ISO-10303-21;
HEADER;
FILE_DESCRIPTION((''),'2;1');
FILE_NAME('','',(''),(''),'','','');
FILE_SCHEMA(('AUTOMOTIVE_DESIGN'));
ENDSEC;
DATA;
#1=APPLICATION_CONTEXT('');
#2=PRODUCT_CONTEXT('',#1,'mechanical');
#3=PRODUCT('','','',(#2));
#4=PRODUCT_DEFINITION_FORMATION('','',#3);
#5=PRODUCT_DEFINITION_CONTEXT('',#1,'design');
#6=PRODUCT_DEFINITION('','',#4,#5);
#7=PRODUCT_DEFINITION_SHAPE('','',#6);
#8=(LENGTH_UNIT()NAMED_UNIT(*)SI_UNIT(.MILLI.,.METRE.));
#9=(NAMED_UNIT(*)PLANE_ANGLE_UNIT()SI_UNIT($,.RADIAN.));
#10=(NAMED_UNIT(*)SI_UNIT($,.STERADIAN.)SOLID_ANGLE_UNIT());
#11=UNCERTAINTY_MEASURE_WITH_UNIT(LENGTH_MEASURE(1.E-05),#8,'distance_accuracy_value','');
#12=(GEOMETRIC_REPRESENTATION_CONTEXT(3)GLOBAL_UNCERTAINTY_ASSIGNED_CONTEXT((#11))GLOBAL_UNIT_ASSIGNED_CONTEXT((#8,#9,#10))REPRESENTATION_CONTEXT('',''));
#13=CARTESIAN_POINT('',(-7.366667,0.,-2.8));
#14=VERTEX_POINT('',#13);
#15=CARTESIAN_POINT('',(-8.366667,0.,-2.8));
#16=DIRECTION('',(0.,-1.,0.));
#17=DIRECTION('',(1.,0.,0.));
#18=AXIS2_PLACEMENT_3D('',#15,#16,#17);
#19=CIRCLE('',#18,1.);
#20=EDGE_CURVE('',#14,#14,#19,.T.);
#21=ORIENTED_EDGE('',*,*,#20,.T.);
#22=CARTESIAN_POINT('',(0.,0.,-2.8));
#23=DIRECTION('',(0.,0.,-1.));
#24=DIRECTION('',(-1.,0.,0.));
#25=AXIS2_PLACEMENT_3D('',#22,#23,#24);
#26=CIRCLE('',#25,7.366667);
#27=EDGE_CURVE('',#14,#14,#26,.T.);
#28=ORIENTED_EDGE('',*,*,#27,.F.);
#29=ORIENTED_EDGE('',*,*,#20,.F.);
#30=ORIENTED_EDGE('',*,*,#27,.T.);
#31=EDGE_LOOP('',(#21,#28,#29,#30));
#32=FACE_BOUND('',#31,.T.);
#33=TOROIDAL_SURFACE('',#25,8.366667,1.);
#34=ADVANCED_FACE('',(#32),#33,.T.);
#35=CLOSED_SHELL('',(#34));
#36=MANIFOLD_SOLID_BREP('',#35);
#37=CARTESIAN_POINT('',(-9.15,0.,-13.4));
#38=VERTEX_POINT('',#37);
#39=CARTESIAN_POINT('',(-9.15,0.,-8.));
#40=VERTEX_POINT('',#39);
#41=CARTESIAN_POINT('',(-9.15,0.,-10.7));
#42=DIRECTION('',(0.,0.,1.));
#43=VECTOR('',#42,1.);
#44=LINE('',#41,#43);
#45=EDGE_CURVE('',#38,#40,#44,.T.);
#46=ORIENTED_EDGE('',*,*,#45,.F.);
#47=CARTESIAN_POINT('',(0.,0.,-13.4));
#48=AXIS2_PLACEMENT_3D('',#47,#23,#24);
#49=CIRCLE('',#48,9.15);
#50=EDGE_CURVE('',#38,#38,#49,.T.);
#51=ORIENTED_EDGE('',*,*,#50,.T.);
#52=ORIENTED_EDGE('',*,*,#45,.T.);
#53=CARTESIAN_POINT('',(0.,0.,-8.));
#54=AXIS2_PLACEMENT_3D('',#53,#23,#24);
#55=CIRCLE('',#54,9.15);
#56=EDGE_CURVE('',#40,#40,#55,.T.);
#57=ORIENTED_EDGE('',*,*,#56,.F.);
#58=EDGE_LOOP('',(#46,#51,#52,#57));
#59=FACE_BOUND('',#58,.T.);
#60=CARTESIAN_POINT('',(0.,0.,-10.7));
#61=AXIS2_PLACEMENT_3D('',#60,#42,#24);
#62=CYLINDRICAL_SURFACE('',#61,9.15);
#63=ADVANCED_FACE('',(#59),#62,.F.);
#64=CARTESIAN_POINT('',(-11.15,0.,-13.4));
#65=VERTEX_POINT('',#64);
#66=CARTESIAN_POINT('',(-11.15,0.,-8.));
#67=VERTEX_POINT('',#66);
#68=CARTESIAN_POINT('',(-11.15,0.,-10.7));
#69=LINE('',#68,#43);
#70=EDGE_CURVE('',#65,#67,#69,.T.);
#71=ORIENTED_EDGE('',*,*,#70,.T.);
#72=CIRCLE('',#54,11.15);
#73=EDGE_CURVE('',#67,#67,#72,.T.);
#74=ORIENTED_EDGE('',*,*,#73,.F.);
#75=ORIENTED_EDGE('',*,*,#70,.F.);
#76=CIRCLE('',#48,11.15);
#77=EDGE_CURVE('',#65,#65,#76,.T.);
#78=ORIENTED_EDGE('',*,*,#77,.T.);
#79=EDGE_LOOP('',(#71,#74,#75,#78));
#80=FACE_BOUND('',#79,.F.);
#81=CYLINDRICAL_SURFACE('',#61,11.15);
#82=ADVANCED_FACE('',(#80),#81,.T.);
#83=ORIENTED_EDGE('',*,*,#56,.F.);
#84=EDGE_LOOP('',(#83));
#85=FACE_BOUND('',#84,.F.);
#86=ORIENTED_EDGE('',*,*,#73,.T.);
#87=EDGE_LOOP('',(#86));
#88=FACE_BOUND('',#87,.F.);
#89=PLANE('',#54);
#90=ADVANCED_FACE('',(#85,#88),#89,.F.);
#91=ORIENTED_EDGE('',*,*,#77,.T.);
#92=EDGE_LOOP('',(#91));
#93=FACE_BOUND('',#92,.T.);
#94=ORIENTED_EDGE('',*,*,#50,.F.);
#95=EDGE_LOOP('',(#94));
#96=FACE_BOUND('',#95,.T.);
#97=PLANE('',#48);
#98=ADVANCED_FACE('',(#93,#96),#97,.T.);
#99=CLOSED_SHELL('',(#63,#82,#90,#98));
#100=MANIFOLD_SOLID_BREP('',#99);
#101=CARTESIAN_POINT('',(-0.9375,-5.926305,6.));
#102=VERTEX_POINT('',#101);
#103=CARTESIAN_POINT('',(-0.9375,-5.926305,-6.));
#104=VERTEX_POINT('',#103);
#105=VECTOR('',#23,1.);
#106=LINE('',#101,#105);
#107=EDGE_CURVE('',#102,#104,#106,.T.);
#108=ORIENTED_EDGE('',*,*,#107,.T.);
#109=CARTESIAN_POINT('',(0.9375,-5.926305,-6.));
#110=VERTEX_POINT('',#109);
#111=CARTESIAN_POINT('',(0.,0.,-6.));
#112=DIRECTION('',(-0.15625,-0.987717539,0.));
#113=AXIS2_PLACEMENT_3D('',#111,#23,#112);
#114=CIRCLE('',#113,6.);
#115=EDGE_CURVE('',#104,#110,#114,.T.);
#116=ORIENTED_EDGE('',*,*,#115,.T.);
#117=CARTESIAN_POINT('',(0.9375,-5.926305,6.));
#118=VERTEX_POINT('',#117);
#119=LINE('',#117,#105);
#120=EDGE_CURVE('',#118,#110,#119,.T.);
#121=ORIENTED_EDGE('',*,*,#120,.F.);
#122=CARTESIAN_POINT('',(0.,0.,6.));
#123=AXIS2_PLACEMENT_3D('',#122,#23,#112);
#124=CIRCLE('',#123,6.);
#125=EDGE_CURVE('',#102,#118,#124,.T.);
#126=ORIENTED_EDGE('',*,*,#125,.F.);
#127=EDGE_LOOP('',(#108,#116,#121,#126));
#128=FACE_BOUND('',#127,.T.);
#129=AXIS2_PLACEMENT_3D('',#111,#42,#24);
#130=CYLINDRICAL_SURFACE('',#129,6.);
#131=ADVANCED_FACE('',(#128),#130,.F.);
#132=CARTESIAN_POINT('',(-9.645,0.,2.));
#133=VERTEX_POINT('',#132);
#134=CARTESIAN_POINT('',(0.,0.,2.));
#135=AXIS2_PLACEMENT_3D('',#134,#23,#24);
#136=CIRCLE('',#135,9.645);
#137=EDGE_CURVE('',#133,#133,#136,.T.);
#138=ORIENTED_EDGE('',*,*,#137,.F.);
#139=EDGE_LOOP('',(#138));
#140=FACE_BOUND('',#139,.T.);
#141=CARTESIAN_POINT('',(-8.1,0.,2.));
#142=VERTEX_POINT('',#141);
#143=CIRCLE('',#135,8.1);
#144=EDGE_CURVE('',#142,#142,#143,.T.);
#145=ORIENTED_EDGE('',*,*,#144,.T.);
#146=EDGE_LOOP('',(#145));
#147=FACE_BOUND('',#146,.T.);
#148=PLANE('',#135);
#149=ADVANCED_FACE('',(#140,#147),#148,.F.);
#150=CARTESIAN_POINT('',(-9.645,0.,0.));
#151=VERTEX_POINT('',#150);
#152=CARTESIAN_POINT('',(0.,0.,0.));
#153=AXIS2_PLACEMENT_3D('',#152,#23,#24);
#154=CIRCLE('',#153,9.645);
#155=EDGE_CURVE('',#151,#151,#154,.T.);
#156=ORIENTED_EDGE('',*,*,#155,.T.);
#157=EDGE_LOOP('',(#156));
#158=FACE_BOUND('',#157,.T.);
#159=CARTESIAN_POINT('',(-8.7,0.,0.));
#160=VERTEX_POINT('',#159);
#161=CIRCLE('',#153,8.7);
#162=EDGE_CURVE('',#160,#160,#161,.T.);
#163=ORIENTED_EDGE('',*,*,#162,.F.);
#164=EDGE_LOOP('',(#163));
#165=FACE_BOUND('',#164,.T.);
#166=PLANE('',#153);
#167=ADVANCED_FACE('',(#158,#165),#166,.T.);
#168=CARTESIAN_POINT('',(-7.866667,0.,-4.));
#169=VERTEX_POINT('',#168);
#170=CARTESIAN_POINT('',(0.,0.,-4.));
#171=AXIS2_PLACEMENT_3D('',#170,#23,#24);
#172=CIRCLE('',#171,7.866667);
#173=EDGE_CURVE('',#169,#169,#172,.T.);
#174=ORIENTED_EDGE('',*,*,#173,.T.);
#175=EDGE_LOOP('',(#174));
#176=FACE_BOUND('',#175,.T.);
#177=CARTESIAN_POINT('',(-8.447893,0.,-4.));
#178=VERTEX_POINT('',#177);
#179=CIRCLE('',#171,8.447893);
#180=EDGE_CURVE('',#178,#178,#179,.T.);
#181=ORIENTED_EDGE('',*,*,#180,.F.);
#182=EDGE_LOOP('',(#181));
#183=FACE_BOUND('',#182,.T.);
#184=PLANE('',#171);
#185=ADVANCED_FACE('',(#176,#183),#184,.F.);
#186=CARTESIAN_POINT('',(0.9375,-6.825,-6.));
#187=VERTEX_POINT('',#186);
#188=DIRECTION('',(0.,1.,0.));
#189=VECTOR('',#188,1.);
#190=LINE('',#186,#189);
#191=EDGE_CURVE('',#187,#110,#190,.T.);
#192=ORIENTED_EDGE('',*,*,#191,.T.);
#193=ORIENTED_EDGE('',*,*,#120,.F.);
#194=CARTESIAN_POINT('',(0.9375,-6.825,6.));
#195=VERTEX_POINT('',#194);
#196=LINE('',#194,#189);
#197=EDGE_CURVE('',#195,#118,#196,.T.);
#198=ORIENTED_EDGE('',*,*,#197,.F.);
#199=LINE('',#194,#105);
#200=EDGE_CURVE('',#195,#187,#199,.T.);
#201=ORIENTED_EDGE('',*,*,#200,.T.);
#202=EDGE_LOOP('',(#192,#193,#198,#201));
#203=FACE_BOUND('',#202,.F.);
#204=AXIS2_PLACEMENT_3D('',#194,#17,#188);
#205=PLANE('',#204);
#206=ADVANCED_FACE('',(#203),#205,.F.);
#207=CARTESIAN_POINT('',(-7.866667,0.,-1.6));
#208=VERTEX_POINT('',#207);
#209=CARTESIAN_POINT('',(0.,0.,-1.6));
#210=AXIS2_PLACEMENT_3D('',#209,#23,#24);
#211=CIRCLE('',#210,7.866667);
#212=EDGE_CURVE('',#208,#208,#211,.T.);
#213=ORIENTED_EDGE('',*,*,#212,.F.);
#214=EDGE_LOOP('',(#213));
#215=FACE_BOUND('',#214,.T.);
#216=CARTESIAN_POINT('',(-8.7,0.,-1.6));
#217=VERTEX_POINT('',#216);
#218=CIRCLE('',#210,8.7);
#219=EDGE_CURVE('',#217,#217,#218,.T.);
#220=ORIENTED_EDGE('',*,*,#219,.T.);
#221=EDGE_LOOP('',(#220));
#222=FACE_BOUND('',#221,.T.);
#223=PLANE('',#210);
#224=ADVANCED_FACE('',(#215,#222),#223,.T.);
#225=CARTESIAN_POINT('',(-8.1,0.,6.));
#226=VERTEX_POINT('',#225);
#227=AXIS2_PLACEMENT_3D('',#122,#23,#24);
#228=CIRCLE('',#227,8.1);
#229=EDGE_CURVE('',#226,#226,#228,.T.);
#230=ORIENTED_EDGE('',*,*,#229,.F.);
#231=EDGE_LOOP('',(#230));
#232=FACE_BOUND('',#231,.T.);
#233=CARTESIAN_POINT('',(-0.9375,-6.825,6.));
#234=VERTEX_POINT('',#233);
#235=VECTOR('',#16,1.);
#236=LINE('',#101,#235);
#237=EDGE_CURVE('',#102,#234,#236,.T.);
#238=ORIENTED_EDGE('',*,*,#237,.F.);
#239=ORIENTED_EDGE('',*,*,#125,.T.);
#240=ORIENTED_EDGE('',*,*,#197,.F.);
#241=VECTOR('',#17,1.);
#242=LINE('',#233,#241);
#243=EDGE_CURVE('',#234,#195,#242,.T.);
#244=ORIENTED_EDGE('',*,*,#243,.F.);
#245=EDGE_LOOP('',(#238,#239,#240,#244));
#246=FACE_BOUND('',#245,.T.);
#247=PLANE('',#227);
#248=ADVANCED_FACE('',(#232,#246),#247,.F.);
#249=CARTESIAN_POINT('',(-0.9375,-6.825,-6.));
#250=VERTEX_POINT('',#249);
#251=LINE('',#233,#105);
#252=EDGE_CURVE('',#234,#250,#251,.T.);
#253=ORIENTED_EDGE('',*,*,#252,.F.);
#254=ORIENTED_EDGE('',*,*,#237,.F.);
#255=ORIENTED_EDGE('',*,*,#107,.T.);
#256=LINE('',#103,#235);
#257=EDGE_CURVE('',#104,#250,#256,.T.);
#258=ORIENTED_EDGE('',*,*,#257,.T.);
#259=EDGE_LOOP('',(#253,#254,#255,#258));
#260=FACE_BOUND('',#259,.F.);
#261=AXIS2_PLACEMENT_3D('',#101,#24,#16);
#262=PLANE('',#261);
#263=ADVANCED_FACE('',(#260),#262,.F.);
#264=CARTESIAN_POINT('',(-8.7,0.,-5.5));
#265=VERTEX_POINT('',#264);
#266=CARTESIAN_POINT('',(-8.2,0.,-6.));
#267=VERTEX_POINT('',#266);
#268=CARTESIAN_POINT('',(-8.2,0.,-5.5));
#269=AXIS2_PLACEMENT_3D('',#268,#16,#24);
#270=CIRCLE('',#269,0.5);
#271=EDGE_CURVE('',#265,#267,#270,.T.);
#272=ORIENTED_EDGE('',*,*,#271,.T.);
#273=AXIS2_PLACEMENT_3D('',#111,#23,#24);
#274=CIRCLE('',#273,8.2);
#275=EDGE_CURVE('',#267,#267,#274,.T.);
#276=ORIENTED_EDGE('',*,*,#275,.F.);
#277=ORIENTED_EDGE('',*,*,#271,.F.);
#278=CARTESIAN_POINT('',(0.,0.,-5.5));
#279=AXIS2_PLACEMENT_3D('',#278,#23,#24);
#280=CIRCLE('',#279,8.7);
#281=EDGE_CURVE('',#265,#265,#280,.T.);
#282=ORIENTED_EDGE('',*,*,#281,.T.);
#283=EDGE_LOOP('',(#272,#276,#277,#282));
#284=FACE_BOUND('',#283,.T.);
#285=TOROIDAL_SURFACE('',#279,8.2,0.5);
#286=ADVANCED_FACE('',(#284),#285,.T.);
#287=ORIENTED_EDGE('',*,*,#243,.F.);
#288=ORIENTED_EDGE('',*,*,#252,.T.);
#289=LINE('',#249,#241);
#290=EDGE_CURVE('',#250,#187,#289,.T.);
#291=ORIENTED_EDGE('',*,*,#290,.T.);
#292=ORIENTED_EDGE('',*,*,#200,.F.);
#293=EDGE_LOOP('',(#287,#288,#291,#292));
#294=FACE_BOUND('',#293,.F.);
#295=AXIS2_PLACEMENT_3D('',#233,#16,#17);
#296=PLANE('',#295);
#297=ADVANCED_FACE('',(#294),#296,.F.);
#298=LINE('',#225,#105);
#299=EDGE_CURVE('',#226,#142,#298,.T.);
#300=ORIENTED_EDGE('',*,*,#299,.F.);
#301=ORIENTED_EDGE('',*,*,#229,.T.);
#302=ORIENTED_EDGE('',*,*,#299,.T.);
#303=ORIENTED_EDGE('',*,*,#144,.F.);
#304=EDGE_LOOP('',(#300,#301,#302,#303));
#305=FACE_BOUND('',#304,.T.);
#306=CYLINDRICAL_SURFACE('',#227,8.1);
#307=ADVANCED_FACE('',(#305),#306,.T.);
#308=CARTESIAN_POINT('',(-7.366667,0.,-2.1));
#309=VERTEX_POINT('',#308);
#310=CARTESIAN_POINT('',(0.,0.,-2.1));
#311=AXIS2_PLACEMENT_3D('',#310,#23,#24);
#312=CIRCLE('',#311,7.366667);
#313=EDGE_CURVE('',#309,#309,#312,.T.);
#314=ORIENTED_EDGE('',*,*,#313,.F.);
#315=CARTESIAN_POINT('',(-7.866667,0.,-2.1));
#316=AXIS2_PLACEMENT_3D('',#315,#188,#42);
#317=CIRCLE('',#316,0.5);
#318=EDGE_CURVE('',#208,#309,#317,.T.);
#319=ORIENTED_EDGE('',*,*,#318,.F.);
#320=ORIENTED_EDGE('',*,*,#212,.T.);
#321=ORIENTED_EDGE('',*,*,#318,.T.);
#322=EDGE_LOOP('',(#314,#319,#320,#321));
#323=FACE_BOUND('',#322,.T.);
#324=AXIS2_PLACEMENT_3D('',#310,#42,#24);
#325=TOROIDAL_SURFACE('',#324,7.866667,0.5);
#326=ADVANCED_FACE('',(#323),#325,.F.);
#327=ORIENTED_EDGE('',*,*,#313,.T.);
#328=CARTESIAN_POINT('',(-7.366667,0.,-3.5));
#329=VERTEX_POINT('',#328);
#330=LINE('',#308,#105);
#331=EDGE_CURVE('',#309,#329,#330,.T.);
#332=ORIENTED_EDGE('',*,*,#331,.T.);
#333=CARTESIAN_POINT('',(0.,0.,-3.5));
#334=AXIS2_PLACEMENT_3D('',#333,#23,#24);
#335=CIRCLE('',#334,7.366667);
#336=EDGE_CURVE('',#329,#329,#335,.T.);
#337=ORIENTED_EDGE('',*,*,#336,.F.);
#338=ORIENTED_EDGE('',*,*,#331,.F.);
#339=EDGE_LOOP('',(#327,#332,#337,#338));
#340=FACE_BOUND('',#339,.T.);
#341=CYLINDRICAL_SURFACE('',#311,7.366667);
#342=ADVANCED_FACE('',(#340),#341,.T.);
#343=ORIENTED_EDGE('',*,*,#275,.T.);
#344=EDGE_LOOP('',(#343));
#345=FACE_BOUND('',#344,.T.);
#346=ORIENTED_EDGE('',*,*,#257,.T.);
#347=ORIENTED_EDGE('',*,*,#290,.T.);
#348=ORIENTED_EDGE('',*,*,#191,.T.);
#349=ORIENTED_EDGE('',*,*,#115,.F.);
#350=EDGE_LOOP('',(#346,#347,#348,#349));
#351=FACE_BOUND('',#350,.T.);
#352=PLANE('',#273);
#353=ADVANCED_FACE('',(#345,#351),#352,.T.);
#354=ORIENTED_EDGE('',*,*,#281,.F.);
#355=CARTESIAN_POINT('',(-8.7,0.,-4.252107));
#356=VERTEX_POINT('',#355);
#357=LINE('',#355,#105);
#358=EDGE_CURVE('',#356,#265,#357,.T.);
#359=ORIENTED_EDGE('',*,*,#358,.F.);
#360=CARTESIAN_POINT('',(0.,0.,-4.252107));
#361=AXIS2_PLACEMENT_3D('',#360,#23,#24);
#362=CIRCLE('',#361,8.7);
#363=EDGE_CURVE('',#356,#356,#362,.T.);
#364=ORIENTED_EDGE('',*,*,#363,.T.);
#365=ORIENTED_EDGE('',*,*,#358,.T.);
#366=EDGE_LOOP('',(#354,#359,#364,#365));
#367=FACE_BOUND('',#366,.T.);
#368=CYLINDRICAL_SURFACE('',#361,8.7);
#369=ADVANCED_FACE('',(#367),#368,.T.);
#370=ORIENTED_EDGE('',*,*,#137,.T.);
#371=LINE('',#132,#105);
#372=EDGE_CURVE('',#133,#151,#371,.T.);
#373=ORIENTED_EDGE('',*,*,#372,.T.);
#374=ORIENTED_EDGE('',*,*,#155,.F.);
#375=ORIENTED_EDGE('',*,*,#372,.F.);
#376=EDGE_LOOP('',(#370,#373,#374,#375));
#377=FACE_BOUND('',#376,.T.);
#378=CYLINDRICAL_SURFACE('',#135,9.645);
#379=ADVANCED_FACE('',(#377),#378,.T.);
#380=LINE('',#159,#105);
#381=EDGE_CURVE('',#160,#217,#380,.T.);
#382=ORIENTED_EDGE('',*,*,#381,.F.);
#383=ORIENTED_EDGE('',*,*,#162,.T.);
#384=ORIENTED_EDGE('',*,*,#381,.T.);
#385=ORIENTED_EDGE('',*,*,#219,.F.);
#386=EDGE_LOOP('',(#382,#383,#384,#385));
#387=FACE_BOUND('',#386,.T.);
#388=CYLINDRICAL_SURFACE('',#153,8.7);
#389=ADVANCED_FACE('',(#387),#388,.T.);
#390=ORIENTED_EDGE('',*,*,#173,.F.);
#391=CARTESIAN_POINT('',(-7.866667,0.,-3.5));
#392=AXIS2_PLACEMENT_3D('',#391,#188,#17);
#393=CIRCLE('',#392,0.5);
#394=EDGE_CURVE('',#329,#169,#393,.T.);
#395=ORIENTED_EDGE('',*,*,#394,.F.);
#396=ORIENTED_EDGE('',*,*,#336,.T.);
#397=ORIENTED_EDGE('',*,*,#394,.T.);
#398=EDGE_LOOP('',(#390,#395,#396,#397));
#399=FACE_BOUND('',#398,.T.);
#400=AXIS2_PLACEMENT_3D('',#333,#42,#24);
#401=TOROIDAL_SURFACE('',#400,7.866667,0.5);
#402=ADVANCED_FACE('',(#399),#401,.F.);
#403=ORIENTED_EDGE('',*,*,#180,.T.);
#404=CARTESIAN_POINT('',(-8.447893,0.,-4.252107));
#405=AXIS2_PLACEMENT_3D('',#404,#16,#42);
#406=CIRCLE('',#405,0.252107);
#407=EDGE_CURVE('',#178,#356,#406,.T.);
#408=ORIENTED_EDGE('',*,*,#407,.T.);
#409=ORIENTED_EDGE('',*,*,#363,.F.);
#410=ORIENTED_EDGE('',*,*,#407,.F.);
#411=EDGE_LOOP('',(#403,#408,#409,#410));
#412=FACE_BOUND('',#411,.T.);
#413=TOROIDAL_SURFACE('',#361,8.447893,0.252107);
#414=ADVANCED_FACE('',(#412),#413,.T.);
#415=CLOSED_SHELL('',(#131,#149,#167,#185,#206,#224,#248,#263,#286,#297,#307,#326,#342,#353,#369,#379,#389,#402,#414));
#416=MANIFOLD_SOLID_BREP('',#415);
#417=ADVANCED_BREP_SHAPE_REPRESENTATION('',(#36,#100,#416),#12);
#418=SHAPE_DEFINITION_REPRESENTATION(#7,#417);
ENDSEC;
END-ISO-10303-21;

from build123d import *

# Parameters (mm, degrees)
F0_R     = 1
F0_W     = 2
F0_H     = 5.4
F3_DEPTH = 12


# Not quite as in the source:
# - a feature names something its author has since deleted; it is built from what else it names


with BuildPart() as f1:
    # F0 (on Front) → F1 (revolve)
    with BuildSketch(Plane.XZ):
        with BuildLine():
            Line((-9.645, 0), (-8.7, 0))
            Line((-8.7, 0), (-8.7, -1.6))
            Line((-8.7, -1.6), (-7.8666666667, -1.6))
            ThreePointArc((-7.8666666667, -1.6), (-7.5131132761, -1.7464466094), (-7.3666666667, -2.1))
            Line((-7.3666666667, -2.1), (-7.3666666667, -2.8))
            Line((-7.3666666667, -2.8), (-7.3666666667, -3.5))
            ThreePointArc((-7.3666666667, -3.5), (-7.5131132761, -3.8535533906), (-7.8666666667, -4))
            Line((-7.8666666667, -4), (-8.4478927586, -4))
            ThreePointArc((-8.4478927586, -4), (-8.6261594986, -4.0738405014), (-8.7, -4.2521072414))
            Line((-8.7, -4.2521072414), (-8.7, -5.5))
            ThreePointArc((-8.7, -5.5), (-8.5535533906, -5.8535533906), (-8.2, -6))
            Line((-8.2, -6), (-6, -6))
            Line((-6, -6), (-6, 0))
            Line((-6, 0), (-6, 6))
            Line((-6, 6), (-8.1, 6))
            Line((-8.1, 6), (-8.1, 2))
            Line((-8.1, 2), (-9.645, 2))
            Line((-9.645, 2), (-9.645, 0))
        make_face()
    revolve(axis=Axis((0, 0, -0.5250007278), (0, 0, -1)))

    # F2 (on face) → F3 (cut, through all)
    with BuildSketch(Plane.XY.offset(6)):
        with BuildLine():
            Line((-0.9375, -5.926305236), (-0.9375, -6.825))
            Line((-0.9375, -6.825), (0.9375, -6.825))
            Line((0.9375, -6.825), (0.9375, -5.926305236))
            ThreePointArc((0.9375, -5.926305236), (0, -6), (-0.9375, -5.926305236))
        make_face()
    extrude(amount=-F3_DEPTH, mode=Mode.SUBTRACT)


with BuildPart() as f1b:
    # F0 (on Front) → F1, piece 2 (revolve)
    with BuildSketch(Plane.XZ):
        with Locations((-8.3666666667, -2.8)):
            Circle(F0_R)
    revolve(axis=Axis((0, 0, -0.5250007278), (0, 0, -1)))


with BuildPart() as f1c:
    # F0 (on Front) → F1, piece 3 (revolve)
    with BuildSketch(Plane.XZ):
        with Locations((-10.15, -10.7)):
            Rectangle(F0_W, F0_H)
    revolve(axis=Axis((0, 0, -0.5250007278), (0, 0, -1)))


solid = Compound([f1.part, f1b.part, f1c.part])
